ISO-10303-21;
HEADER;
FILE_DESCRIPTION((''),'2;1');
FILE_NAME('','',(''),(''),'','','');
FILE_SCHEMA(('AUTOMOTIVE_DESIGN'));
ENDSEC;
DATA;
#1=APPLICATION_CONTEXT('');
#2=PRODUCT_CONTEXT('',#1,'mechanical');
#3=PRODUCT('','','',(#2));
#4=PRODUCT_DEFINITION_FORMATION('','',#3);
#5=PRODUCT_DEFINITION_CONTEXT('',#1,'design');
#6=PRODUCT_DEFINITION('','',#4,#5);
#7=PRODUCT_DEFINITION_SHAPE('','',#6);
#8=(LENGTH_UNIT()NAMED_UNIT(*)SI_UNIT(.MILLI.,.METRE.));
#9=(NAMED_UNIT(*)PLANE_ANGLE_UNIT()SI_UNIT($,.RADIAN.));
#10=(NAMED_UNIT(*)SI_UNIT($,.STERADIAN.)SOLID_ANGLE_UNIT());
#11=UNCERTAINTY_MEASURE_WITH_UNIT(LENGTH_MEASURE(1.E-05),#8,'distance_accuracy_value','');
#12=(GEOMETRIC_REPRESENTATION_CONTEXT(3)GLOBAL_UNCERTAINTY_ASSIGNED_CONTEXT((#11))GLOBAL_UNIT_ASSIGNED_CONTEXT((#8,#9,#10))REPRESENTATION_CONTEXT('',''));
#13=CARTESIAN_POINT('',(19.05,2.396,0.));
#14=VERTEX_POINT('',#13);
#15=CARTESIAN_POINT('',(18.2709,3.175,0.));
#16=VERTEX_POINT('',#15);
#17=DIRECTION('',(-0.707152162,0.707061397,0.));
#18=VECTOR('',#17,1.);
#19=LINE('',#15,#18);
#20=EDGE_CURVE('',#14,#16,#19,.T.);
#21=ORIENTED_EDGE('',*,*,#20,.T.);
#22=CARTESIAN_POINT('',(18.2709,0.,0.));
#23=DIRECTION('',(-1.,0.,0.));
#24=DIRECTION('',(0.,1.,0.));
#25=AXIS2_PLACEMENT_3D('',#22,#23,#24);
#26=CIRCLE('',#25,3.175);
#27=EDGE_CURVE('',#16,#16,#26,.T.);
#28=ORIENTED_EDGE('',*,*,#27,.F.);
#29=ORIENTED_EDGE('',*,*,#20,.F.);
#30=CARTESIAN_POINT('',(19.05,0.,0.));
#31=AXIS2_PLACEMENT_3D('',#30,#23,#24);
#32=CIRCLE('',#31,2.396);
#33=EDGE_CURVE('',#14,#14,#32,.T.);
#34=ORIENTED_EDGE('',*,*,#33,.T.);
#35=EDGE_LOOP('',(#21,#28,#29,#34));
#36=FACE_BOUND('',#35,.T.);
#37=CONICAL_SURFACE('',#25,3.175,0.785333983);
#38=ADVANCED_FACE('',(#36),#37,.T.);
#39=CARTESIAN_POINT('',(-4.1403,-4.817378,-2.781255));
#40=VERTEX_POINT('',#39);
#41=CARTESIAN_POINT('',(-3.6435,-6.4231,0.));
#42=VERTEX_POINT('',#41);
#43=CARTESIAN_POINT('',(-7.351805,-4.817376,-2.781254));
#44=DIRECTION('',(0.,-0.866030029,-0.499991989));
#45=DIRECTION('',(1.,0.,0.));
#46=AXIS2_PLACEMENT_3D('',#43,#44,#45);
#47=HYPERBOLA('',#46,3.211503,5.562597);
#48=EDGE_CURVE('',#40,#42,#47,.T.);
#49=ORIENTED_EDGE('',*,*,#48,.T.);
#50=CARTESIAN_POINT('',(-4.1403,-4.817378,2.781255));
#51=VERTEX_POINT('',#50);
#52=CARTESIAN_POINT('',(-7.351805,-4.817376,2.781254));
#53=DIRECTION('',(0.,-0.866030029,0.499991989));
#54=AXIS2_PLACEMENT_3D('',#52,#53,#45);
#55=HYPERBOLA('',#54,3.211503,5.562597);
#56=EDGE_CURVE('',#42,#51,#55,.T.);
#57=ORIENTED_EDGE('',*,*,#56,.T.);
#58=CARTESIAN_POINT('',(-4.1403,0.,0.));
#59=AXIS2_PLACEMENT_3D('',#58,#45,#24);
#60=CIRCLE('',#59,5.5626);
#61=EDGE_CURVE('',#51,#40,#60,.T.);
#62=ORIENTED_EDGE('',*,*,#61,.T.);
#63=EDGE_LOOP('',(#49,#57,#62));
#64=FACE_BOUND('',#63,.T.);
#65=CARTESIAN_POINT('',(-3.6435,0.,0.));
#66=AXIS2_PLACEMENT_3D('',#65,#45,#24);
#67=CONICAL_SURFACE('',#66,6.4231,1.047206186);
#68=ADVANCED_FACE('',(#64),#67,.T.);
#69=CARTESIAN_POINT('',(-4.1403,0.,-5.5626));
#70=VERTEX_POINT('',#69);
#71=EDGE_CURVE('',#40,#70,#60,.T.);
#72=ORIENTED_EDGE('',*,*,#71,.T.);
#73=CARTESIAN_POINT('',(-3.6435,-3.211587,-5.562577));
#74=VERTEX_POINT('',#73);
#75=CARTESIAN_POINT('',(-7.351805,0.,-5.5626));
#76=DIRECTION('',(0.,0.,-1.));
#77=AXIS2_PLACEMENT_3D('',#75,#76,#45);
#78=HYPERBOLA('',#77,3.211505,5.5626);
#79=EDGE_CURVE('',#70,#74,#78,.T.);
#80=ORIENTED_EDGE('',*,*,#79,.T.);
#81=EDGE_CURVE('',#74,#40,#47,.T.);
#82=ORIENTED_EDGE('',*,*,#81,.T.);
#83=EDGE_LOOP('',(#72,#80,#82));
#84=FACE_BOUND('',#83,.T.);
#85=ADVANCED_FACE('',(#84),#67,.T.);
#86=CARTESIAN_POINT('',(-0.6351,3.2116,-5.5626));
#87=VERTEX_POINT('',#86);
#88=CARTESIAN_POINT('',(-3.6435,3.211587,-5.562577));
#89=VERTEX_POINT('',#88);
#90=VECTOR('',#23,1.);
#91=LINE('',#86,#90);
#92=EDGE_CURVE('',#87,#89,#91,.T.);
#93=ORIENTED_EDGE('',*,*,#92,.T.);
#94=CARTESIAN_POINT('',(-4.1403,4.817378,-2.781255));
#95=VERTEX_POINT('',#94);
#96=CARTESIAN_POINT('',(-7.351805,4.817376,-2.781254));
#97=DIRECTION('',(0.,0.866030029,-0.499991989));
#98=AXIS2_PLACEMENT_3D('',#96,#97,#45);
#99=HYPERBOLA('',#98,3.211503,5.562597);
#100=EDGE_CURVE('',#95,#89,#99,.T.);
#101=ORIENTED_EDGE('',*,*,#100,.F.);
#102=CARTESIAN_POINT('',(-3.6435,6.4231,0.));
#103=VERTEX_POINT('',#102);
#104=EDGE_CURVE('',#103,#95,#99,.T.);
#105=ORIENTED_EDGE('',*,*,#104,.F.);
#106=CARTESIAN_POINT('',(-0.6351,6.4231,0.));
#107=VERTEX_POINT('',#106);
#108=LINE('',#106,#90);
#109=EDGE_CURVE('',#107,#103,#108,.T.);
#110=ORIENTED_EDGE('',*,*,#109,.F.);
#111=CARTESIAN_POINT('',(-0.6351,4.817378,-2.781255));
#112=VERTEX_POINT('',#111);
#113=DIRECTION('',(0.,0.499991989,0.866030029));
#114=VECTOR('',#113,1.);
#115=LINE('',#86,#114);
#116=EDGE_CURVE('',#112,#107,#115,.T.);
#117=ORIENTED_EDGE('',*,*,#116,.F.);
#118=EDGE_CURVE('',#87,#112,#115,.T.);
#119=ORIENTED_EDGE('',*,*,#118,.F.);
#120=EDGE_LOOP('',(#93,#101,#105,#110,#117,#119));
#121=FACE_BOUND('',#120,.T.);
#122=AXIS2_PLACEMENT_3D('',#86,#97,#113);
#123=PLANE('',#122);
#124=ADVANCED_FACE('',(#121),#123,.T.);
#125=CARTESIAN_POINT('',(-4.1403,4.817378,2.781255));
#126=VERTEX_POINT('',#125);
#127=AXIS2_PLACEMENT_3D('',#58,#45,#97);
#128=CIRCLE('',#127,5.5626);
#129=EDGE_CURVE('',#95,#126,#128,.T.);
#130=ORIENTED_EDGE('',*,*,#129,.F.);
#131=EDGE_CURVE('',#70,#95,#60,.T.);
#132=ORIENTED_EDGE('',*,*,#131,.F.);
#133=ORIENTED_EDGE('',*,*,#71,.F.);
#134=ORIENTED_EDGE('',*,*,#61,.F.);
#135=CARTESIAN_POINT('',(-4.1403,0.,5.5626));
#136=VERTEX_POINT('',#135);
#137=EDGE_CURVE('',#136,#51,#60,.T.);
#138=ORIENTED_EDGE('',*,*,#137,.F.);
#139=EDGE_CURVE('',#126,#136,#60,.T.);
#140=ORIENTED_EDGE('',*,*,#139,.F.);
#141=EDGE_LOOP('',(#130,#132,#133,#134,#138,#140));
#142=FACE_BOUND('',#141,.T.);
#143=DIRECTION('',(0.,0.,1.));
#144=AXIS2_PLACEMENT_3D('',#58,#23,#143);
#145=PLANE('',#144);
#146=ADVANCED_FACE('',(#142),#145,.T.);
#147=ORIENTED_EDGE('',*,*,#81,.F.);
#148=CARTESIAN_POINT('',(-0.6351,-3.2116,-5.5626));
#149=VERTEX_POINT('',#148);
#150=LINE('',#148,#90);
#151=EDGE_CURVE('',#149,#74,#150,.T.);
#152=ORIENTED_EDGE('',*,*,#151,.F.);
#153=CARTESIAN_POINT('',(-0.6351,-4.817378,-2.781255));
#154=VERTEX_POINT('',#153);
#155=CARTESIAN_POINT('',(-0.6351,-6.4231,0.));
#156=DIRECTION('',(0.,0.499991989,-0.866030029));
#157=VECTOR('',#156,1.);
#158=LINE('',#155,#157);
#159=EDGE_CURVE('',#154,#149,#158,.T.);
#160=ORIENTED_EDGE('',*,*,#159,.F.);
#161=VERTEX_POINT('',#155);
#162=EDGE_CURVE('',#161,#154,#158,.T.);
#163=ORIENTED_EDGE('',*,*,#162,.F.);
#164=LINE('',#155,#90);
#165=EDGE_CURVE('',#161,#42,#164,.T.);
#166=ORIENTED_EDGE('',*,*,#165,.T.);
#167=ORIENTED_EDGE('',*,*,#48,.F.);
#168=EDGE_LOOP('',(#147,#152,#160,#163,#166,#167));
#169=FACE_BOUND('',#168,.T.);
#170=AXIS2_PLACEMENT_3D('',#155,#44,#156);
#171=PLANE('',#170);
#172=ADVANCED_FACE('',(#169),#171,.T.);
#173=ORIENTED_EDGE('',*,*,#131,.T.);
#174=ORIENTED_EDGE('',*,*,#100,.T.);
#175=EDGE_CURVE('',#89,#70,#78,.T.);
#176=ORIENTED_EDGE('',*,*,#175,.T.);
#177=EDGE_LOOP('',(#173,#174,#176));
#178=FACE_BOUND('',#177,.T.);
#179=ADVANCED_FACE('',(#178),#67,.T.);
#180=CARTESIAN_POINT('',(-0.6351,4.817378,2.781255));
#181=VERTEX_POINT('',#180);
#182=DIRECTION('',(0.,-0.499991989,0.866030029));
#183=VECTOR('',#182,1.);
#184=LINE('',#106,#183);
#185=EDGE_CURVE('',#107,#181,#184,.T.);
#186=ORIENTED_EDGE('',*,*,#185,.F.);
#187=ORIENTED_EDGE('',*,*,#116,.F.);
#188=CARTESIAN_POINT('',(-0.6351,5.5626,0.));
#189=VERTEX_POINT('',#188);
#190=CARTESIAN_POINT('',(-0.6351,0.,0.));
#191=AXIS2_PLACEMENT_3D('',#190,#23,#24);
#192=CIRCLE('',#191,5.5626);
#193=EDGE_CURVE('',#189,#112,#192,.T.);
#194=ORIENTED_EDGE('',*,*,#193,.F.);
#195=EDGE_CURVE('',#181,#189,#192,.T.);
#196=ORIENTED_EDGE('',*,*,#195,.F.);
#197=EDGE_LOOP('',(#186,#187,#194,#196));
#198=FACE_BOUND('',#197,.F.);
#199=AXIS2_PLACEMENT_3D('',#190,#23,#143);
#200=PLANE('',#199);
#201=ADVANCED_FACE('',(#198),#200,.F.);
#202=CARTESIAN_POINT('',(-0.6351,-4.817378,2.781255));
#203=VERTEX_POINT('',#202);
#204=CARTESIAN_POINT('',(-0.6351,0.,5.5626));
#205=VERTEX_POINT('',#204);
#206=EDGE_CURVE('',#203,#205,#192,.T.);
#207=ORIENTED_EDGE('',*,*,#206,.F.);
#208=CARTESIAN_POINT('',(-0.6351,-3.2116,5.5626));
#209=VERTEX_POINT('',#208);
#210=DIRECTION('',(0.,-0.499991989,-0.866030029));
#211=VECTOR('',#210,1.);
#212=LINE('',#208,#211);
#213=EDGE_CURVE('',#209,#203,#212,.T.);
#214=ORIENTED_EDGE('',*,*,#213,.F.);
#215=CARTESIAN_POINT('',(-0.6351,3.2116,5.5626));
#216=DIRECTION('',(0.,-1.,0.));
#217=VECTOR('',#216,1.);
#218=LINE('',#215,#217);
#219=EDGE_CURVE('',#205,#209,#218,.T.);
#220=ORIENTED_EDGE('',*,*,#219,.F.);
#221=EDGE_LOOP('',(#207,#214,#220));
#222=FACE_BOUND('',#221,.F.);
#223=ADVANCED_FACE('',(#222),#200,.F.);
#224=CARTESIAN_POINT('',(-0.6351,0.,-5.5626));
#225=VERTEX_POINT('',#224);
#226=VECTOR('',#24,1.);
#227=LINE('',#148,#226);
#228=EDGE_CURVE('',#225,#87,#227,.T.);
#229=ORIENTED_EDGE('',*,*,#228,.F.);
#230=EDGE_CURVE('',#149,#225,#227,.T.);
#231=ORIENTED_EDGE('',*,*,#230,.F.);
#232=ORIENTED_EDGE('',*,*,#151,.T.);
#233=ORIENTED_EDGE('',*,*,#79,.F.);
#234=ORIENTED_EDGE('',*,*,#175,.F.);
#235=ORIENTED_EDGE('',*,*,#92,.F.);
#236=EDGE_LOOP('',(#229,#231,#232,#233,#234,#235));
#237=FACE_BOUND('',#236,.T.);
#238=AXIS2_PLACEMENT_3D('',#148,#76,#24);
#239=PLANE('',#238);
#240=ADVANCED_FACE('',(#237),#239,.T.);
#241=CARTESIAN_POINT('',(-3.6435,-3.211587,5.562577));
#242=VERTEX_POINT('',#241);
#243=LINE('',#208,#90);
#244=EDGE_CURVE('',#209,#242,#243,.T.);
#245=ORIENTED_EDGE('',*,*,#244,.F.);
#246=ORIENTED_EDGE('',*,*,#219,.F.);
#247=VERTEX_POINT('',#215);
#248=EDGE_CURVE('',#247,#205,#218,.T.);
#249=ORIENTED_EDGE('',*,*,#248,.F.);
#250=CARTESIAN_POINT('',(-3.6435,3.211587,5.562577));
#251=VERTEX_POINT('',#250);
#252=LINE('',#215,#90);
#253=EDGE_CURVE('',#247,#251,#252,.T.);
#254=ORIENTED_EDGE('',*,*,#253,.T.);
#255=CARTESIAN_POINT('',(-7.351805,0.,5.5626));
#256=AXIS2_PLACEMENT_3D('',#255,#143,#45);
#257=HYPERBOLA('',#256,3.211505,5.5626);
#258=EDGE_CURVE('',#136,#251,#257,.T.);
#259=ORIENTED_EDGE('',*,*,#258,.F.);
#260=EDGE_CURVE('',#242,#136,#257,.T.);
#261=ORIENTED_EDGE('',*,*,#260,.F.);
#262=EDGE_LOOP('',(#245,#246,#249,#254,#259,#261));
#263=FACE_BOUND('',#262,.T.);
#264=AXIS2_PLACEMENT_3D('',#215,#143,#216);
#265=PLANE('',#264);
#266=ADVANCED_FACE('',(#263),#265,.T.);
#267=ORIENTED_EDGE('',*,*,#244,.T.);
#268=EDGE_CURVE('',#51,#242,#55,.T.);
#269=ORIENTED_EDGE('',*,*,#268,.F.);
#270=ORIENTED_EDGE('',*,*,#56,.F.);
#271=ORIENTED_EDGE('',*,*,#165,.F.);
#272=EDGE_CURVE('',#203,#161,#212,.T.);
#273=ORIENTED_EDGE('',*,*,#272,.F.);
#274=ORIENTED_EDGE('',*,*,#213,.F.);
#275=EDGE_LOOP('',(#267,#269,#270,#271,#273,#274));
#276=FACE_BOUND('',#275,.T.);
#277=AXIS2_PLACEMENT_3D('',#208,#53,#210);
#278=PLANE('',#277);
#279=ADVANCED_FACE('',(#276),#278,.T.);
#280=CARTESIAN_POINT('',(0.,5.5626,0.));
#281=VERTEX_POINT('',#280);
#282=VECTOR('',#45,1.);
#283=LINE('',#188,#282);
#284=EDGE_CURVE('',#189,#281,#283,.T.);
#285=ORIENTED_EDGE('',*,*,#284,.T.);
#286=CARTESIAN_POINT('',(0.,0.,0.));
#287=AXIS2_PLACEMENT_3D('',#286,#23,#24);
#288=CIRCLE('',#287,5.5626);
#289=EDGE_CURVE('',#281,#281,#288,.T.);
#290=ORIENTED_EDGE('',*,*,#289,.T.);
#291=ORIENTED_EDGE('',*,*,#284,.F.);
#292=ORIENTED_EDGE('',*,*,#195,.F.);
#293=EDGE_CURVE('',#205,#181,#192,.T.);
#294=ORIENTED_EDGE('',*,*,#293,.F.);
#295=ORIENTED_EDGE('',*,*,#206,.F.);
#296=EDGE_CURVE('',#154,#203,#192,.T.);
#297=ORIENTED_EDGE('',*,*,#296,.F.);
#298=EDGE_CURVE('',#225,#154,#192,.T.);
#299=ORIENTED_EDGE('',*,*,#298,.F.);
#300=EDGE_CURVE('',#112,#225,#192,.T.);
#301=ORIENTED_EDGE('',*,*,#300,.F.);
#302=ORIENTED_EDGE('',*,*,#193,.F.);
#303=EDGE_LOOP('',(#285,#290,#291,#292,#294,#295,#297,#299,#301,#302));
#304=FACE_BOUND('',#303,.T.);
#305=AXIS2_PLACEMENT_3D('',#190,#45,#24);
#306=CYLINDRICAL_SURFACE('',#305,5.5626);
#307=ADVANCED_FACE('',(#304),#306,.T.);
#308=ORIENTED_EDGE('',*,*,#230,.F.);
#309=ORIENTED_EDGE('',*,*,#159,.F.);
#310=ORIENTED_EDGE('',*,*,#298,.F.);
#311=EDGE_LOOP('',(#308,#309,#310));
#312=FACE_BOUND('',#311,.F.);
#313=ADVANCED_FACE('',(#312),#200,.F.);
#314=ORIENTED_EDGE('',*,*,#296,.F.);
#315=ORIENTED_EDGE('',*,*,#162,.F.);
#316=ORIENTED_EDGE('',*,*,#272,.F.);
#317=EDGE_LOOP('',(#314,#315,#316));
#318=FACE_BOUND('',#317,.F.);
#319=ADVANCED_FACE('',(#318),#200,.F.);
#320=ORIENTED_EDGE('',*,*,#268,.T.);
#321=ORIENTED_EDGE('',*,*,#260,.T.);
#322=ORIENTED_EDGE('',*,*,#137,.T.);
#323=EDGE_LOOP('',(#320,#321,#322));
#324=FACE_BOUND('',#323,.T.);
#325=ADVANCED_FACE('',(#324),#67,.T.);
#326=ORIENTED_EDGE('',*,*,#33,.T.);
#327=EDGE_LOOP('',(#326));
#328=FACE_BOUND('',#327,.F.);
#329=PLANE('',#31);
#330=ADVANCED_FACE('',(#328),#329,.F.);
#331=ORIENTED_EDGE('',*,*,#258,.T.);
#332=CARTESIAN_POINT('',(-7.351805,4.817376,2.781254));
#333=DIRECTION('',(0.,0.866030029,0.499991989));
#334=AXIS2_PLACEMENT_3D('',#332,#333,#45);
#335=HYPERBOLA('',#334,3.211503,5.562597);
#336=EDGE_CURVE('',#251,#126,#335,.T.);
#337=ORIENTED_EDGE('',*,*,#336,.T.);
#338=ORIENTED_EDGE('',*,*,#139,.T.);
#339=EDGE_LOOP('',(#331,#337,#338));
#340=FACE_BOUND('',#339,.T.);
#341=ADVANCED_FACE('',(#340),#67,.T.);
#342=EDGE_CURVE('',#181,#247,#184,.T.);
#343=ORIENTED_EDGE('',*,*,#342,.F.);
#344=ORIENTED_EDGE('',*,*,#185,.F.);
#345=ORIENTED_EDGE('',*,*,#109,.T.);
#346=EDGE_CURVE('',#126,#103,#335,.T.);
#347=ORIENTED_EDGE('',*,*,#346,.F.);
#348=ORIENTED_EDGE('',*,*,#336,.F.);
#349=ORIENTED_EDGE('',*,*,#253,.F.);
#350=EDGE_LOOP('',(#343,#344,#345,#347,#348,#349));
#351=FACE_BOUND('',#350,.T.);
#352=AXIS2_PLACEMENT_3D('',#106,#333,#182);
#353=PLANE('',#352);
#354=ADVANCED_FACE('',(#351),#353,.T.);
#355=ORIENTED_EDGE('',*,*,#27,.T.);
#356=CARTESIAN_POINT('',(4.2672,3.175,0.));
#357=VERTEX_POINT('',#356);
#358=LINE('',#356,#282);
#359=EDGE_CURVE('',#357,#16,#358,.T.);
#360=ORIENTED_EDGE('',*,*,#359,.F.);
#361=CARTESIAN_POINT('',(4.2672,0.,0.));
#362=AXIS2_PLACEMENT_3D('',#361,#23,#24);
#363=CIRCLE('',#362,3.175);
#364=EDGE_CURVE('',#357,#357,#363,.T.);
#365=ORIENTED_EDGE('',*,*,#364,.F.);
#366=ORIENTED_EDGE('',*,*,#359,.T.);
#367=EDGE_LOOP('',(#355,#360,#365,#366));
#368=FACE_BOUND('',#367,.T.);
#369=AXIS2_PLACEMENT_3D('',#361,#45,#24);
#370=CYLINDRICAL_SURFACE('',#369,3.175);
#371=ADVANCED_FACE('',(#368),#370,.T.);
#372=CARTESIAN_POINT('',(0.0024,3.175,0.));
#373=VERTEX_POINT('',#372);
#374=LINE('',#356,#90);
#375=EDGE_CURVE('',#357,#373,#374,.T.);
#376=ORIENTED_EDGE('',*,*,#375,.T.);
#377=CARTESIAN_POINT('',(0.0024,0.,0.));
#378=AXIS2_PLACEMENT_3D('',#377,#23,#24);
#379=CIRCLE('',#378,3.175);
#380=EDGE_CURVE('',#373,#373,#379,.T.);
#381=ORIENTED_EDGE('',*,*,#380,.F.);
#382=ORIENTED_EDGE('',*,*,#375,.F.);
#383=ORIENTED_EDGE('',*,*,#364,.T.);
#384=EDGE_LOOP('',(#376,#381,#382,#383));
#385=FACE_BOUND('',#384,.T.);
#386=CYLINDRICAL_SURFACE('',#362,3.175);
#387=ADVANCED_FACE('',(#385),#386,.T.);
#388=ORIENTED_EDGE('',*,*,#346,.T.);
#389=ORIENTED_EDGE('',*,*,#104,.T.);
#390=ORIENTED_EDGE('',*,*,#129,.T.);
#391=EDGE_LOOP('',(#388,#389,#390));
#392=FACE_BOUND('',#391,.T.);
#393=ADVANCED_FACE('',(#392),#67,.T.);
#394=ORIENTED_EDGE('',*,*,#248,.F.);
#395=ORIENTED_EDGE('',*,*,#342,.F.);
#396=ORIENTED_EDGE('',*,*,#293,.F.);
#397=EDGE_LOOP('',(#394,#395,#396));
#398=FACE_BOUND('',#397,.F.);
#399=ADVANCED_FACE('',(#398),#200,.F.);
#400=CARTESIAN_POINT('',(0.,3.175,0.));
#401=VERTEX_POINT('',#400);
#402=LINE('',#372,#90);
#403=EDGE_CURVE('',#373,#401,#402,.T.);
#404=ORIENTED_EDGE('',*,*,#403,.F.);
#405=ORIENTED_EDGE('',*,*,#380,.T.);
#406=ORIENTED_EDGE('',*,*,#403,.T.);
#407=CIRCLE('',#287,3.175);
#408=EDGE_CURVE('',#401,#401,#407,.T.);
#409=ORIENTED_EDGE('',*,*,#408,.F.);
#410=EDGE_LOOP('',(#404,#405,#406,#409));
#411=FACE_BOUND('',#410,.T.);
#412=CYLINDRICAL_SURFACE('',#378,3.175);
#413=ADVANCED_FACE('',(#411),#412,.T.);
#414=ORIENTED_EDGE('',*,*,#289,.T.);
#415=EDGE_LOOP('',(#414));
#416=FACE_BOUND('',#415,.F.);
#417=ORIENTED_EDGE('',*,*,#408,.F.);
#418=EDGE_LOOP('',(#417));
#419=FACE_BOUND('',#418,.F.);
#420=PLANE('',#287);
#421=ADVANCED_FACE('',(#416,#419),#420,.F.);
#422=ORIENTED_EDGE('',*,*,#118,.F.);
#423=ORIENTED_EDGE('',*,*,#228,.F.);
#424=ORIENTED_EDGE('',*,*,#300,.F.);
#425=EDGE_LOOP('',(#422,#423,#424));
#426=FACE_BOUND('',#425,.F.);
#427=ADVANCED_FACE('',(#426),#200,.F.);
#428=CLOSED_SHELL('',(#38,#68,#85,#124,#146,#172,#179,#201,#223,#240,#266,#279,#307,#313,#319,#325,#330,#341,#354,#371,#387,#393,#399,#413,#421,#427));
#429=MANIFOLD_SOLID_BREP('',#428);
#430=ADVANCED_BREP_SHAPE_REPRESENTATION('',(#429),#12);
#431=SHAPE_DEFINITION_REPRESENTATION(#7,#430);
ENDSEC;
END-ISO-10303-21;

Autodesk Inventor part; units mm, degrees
ref_plane "YZ Plane" through (0, 0, 0) normal (1, 0, 0) x (0, 1, 0)
ref_plane "XZ Plane" through (0, 0, 0) normal (0, 1, 0) x (-1, 0, 0)
sketch "Sketch1" plane through (0, 0, 0) normal (0, 0, 1) x (1, 0, 0)
  line L0 (0, 5.5626) -> (0, 3.175)
  line L1 (4.2672, 3.175) -> (19.05, 3.175)
  line L2 (19.05, 3.175) -> (19.05, 0)
  line L3 (19.05, 0) -> (-0.6351, 0)
  line L4 (-4.5721, 0) -> (22.987, 0) projected
  line L5 (-0.6351, 0) -> (-0.6351, 5.5626)
  line L6 (-0.6351, 5.5626) -> (0, 5.5626)
  line L7 (4.2672, 3.175) -> (0.0024, 3.175)
  line L8 (0.0024, 3.175) -> (0, 3.175)
  line L9 (0, -1.1125) -> (0, 6.6751) projected
  dimension "d0" = 19.05
  dimension "d1" = 14.7828
  dimension "d2" = 6.35
  dimension "d9" = 0.6351
  dimension "d10" = 11.1252
  dimension "d13" = 4.2648
  dimension "d14" = 6.35
revolve "Body" add sketch "Sketch1" angle 360 about axis through (19.05, 0, 0) along (-1, 0, 0)
sketch "Sketch2" plane through (-0.6351, 0, 0) normal (-1, 0, 0) x (0, 0, 1)
  line L0 (0, 6.4231) -> (5.5626, 3.2116)
  line L1 (5.5626, 3.2116) -> (5.5626, -3.2116)
  line L2 (5.5626, -3.2116) -> (0, -6.4231)
  line L3 (0, -6.4231) -> (-5.5626, -3.2116)
  line L4 (-5.5626, -3.2116) -> (-5.5626, 3.2116)
  line L5 (-5.5626, 3.2116) -> (0, 6.4231)
  point P0 (0, 0)
  point P1 (0, 0)
  dimension "d11" = 11.1252
extrude "Head" add sketch "Sketch2" along normal blind 3.5052
sketch "Sketch4" plane through (0, 0, 0) normal (0, 0, 1) x (1, 0, 0)
  line L0 (-4.1403, 5.5626) -> (-4.1403, 6.4231)
  line L1 (-4.1403, 6.4231) -> (-3.6435, 6.4231)
  line L2 (-3.6435, 6.4231) -> (-4.1403, 5.5626)
  line L3 (-4.8413, 0) -> (0.0659, 0) projected
  line L4 (-0.6351, 6.4231) -> (-4.1403, 6.4231) projected
  line L5 (-4.1403, 3.2116) -> (-4.1403, 6.4231) projected
  dimension "d5" = 30
  dimension "d19" = 11.1252
revolve "Chamfer1" cut sketch "Sketch4" angle 360 about axis through (-10, 0, 0) along (1, 0, 0)
thread "Thread" size "1/4-20 UNC" class "2A" standard "ANSI Unified Screw Threads" length 14.7828
chamfer "Chamfer2" distance 0.779 distance2 0.7791 1 edges at (19.05, -3.175, 0) measured on face at (19.05, -0.5663, 0.5832)
ref_plane "Work Plane1" through (1.525, 0, 0) normal (0, 0, 1) x (1, 0, 0)
equation "\"d0\" = NLG"
equation "\"d1\" = GEL"
equation "\"d2\" = GD"
equation "\"d10\" = SD2"
equation "\"d14\" = BDM"
equation "\"d11\" = SW"
equation "\"d3\" = KOH - SD"
equation "\"d5\" = ANG1"
equation "\"d19\" = SW0"
equation "\"d15\" = GEL"
equation "\"d6\" = -0.5 * SPD + 0.5 * GD"
equation "\"NLG\" = 19.05"
equation "\"GD\" = 6.35"
equation "\"BDM\" = 6.35"
equation "\"KOH\" = 4.1402"
equation "\"GEL\" = 14.7828"
equation "\"SW\" = 11.1252"
equation "\"SW0\" = SW"
equation "\"SPD\" = GD1"
equation "\"SD2\" = SW"
equation "\"SD\" = 0.635"
equation "\"ANG1\" = 30deg"
equation "\"GAL\" = 4.26466"
equation "\"GUL\" = 0.77902"
equation "\"RR\" = 0.381"
equation "\"WFT\" = SD"
equation "\"GD1\" = 4.79196"
equation "\"THREADDIA\" = 6.35"
equation "\"SDH\" = SW"
equation "\"SDHG\" = 0.00254"
equation "\"TOA\" = 30deg"
equation "\"FAWI\" = 45deg"
equation "\"NND\" = 6.35"
equation "\"E0\" = 12.84961"
properties part number "AS 2465 - 1/4 x 3/4  UNC" material "Steel, Mild"
